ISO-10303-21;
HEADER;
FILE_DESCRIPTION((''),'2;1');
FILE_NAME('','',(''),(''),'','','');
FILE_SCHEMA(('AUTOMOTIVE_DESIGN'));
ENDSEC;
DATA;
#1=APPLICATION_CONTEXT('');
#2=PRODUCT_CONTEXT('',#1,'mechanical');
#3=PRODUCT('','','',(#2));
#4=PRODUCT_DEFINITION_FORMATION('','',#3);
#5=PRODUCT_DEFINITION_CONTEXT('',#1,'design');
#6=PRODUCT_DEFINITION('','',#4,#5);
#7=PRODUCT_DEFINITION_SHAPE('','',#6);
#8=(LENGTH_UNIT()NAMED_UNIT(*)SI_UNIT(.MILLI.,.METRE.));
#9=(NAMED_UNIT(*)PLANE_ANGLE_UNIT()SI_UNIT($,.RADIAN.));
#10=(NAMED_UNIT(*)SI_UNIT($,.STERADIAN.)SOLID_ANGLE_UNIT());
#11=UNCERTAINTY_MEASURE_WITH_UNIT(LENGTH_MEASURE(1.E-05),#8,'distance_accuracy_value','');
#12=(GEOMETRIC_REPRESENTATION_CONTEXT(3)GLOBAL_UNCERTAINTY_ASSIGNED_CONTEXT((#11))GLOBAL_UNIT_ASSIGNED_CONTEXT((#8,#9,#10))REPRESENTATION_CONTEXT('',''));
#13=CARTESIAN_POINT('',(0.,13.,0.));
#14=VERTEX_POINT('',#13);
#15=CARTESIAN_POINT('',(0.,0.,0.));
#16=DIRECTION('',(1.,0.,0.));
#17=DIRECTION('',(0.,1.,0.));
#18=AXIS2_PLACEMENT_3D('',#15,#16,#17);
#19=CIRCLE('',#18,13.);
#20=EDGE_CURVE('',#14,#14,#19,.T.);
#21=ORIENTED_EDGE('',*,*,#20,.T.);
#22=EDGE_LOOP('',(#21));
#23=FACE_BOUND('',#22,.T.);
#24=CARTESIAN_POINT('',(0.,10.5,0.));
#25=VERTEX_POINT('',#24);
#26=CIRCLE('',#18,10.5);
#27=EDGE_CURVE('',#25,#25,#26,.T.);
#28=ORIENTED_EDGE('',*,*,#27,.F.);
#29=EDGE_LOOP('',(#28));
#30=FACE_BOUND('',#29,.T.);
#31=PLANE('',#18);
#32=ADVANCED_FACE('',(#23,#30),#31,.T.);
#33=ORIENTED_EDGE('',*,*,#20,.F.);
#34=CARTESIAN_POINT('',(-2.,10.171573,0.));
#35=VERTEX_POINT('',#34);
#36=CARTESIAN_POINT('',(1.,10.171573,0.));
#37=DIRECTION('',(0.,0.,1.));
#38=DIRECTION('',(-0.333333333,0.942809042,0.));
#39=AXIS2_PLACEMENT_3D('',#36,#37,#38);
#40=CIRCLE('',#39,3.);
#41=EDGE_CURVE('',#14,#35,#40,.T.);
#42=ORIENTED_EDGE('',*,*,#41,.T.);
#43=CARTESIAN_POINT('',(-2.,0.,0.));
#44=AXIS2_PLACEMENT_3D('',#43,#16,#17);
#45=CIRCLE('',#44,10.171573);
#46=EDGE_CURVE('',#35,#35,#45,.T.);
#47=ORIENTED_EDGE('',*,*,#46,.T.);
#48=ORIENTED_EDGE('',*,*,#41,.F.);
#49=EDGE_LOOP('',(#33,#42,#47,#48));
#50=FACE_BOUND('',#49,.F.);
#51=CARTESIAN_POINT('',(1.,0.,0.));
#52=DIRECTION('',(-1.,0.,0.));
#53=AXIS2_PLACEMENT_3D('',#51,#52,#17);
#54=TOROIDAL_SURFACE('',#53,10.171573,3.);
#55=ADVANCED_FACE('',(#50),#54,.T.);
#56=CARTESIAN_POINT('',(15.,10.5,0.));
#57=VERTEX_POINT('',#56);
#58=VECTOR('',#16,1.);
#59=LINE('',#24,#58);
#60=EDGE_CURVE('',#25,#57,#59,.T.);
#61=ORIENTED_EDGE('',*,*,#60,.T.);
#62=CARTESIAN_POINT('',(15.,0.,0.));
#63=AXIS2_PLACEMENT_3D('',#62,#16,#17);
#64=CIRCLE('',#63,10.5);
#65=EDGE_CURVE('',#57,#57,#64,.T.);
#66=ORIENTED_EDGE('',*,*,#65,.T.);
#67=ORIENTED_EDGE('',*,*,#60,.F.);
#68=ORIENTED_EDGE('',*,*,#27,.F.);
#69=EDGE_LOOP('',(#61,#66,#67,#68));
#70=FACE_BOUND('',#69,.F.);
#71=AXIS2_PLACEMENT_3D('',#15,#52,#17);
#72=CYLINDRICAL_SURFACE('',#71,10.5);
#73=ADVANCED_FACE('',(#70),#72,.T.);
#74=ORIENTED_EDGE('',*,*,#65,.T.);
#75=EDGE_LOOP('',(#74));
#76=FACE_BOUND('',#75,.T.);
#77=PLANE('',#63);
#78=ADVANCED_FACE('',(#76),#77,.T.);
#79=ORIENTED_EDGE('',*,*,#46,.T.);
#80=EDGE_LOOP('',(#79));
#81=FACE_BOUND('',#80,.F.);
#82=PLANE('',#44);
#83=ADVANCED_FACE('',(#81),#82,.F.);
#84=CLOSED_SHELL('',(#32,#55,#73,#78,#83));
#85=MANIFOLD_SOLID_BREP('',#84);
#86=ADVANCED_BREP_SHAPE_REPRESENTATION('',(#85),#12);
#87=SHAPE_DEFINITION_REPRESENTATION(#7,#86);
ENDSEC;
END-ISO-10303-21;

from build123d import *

# Parameters (mm, degrees)
F1_R     = 10.5
F2_DEPTH = 15
F3_R     = 13
F4_DEPTH = 2


# Not quite as in the source:
# - a fillet or chamfer that OpenCascade refuses, or shapes differently, is made with other operations: its cross-section is extruded or revolved along the edge and cut away or added


with BuildPart() as f2:
    # F1 (on face) → F2 (new body)
    with BuildSketch(Plane.YZ):
        Circle(F1_R)
    extrude(amount=F2_DEPTH)

    # F3 (on face) → F4 (join)
    with BuildSketch(Plane.YZ):
        Circle(F3_R)
    extrude(amount=-F4_DEPTH)

    # F5: fillet of radius 3 on 1 edges, made by hand

    # F5_s1 → F5_t2 (revolve, cut)
    with BuildSketch(Plane.XY):
        with BuildLine():
            ThreePointArc((0, 13), (-1.4494897428, 11.9036236828), (-2, 10.1715728753))
            Line((-2, 10.1715728753), (-2, 13))
            Line((-2, 13), (0, 13))
        make_face()
    revolve(axis=Axis((-2, 0, 0), (1, 0, 0)), mode=Mode.SUBTRACT)


solid = f2.part
